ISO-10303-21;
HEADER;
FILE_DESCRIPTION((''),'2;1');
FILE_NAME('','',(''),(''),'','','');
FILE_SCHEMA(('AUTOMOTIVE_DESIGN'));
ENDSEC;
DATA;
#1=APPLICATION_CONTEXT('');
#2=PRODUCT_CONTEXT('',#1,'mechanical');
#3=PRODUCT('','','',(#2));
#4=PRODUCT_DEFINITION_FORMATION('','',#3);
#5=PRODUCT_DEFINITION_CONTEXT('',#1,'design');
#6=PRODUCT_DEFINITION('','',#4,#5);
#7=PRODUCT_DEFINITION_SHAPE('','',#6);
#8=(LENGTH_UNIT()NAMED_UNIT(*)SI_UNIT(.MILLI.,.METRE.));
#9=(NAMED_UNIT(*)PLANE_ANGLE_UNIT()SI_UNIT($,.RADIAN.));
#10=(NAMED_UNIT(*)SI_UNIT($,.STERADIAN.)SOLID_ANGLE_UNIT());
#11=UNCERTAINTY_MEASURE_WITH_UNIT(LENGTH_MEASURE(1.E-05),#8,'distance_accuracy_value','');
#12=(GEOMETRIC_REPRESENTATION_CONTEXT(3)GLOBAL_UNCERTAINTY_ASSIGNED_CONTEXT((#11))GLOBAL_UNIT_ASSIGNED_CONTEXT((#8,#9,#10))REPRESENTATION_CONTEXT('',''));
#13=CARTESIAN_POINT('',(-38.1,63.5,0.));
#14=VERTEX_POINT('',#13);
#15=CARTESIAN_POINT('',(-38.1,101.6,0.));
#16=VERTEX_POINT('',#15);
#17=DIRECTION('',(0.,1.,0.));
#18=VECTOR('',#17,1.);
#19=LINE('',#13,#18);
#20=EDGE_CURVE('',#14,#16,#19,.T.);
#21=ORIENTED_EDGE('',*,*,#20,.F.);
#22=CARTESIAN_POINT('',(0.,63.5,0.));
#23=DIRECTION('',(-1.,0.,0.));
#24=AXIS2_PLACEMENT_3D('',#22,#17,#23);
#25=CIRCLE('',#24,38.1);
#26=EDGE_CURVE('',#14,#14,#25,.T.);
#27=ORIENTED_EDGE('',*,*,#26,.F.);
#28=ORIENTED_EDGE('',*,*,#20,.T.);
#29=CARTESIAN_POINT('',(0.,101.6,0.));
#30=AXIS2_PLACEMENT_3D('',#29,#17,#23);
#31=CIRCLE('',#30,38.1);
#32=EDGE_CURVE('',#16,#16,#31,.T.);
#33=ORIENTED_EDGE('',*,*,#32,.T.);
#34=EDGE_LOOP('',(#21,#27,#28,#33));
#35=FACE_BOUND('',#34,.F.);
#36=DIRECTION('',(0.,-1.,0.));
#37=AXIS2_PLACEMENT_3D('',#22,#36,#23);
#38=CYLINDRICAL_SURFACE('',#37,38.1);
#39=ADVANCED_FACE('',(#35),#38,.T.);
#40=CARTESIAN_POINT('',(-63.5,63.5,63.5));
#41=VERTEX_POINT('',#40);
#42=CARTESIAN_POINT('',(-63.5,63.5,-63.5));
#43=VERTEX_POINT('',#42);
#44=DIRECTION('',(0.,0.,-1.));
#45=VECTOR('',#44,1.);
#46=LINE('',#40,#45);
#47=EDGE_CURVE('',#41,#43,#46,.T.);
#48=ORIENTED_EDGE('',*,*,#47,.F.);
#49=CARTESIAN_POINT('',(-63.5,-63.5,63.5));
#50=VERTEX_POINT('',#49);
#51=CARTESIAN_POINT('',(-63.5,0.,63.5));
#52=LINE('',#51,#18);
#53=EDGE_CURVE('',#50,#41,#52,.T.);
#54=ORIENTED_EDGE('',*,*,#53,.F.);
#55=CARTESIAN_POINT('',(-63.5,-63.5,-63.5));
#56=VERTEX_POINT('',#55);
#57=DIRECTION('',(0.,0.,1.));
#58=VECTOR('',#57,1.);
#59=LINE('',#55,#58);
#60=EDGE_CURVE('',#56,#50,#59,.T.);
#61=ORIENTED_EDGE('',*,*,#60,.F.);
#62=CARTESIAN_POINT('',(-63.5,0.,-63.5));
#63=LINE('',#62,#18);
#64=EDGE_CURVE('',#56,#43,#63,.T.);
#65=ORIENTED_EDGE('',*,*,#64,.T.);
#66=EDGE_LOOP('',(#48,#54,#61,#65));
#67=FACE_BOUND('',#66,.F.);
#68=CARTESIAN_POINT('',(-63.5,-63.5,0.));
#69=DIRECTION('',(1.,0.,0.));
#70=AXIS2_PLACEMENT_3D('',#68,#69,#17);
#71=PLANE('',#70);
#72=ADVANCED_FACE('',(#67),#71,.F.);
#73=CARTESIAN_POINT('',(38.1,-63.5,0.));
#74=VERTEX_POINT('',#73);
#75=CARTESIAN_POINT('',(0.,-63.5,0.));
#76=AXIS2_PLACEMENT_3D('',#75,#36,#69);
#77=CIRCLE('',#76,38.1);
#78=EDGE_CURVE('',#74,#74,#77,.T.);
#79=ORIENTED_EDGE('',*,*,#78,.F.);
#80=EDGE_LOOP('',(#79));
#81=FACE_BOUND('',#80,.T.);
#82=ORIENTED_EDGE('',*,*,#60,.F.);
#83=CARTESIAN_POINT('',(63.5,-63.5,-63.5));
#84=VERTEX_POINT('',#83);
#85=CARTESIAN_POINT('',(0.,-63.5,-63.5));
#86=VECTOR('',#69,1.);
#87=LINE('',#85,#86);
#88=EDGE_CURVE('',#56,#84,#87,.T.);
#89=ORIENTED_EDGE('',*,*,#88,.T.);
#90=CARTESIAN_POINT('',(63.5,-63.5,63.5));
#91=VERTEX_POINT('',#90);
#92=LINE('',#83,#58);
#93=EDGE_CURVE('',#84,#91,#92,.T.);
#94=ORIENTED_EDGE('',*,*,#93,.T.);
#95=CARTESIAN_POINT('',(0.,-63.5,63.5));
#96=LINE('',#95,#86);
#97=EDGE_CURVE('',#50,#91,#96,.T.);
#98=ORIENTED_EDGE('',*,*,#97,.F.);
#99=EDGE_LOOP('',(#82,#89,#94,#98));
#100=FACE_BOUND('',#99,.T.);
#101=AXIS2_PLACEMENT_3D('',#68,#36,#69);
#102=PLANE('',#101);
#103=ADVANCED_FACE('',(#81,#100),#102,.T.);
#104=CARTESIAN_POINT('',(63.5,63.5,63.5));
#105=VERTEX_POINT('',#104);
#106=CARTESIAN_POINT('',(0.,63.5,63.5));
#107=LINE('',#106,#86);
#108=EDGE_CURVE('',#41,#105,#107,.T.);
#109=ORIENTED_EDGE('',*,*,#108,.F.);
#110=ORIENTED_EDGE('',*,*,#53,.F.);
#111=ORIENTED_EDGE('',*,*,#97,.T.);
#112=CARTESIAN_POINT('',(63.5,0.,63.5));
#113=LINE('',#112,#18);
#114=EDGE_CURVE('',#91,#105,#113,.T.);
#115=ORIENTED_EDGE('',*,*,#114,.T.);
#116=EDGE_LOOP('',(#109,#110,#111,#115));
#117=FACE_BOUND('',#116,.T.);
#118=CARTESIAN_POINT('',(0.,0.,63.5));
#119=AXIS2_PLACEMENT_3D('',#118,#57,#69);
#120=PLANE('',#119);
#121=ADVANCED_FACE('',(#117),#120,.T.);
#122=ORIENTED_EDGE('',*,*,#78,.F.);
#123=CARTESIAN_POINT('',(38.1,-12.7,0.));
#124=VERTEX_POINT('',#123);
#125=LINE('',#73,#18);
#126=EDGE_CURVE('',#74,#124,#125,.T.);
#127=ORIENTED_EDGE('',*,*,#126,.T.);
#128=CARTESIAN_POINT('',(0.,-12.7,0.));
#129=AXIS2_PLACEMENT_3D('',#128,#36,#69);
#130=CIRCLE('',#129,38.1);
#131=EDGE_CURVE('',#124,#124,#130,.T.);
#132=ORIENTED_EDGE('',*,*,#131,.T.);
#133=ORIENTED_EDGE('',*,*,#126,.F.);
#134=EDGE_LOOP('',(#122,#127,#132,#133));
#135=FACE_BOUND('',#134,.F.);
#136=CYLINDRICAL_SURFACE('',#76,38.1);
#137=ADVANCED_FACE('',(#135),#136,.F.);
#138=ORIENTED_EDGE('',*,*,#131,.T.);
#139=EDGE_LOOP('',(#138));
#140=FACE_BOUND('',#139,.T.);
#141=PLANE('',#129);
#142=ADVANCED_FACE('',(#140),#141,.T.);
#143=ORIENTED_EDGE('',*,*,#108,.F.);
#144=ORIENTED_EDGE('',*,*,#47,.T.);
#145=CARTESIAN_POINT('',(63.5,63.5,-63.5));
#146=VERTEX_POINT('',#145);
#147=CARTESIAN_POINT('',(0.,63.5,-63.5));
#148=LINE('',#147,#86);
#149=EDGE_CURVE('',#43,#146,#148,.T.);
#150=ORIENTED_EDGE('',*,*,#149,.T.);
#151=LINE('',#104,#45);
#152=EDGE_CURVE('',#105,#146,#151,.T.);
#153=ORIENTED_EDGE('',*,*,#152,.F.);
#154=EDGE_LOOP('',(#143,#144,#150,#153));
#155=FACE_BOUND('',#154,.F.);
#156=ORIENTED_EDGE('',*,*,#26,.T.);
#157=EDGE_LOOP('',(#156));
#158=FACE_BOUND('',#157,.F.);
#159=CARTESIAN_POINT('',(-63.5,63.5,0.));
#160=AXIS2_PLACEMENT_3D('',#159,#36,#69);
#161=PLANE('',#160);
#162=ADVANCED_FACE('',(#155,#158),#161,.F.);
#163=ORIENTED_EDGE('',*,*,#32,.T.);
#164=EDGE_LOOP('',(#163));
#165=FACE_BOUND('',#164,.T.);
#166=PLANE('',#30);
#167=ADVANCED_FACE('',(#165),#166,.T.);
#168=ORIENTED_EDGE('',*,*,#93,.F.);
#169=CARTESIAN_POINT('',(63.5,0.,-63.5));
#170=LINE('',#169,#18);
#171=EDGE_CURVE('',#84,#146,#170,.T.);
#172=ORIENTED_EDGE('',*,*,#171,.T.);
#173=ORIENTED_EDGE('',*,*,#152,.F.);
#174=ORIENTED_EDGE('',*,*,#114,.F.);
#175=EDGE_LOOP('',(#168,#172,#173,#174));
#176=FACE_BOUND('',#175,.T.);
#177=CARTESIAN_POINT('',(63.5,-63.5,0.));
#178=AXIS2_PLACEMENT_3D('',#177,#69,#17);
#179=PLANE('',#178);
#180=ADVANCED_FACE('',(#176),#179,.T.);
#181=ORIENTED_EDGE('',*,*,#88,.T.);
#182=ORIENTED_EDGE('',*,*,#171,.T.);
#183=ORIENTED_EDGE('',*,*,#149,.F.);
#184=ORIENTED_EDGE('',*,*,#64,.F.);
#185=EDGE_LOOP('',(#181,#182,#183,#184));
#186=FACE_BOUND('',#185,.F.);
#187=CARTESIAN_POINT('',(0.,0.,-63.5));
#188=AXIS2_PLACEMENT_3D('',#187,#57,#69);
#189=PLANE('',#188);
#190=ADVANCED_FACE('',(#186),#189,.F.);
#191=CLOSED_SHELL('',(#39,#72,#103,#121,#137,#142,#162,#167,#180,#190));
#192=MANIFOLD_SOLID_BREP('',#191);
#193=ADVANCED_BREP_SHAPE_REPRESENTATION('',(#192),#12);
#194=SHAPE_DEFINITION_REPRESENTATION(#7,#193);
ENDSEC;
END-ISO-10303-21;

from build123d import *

# Parameters (mm, degrees)
F1_W     = 127
F1_H     = 127
F2_DEPTH = 63.5
F3_R     = 38.1
F4_DEPTH = 50.8
F5_R     = 38.1
F6_DEPTH = 38.1


# Not quite as in the source:
# - a variable given as a bare number and used for a length is read in inches; the dataset says mm whatever the document's units were


with BuildPart() as f2:
    # F1 (on Top) → F2 (new body, symmetric)
    with BuildSketch(Plane.XY):
        Rectangle(F1_W, F1_H)
    extrude(amount=F2_DEPTH, both=True)

    # F3 (on face) → F4 (cut)
    with BuildSketch(Plane.XZ.offset(63.5)):
        Circle(F3_R)
    extrude(amount=-F4_DEPTH, mode=Mode.SUBTRACT)

    # F5 (on face) → F6 (join)
    with BuildSketch(Plane(origin=(0, 63.5, 0), x_dir=(-1, 0, 0), z_dir=(0, 1, 0))):
        Circle(F5_R)
    extrude(amount=F6_DEPTH)


solid = f2.part
